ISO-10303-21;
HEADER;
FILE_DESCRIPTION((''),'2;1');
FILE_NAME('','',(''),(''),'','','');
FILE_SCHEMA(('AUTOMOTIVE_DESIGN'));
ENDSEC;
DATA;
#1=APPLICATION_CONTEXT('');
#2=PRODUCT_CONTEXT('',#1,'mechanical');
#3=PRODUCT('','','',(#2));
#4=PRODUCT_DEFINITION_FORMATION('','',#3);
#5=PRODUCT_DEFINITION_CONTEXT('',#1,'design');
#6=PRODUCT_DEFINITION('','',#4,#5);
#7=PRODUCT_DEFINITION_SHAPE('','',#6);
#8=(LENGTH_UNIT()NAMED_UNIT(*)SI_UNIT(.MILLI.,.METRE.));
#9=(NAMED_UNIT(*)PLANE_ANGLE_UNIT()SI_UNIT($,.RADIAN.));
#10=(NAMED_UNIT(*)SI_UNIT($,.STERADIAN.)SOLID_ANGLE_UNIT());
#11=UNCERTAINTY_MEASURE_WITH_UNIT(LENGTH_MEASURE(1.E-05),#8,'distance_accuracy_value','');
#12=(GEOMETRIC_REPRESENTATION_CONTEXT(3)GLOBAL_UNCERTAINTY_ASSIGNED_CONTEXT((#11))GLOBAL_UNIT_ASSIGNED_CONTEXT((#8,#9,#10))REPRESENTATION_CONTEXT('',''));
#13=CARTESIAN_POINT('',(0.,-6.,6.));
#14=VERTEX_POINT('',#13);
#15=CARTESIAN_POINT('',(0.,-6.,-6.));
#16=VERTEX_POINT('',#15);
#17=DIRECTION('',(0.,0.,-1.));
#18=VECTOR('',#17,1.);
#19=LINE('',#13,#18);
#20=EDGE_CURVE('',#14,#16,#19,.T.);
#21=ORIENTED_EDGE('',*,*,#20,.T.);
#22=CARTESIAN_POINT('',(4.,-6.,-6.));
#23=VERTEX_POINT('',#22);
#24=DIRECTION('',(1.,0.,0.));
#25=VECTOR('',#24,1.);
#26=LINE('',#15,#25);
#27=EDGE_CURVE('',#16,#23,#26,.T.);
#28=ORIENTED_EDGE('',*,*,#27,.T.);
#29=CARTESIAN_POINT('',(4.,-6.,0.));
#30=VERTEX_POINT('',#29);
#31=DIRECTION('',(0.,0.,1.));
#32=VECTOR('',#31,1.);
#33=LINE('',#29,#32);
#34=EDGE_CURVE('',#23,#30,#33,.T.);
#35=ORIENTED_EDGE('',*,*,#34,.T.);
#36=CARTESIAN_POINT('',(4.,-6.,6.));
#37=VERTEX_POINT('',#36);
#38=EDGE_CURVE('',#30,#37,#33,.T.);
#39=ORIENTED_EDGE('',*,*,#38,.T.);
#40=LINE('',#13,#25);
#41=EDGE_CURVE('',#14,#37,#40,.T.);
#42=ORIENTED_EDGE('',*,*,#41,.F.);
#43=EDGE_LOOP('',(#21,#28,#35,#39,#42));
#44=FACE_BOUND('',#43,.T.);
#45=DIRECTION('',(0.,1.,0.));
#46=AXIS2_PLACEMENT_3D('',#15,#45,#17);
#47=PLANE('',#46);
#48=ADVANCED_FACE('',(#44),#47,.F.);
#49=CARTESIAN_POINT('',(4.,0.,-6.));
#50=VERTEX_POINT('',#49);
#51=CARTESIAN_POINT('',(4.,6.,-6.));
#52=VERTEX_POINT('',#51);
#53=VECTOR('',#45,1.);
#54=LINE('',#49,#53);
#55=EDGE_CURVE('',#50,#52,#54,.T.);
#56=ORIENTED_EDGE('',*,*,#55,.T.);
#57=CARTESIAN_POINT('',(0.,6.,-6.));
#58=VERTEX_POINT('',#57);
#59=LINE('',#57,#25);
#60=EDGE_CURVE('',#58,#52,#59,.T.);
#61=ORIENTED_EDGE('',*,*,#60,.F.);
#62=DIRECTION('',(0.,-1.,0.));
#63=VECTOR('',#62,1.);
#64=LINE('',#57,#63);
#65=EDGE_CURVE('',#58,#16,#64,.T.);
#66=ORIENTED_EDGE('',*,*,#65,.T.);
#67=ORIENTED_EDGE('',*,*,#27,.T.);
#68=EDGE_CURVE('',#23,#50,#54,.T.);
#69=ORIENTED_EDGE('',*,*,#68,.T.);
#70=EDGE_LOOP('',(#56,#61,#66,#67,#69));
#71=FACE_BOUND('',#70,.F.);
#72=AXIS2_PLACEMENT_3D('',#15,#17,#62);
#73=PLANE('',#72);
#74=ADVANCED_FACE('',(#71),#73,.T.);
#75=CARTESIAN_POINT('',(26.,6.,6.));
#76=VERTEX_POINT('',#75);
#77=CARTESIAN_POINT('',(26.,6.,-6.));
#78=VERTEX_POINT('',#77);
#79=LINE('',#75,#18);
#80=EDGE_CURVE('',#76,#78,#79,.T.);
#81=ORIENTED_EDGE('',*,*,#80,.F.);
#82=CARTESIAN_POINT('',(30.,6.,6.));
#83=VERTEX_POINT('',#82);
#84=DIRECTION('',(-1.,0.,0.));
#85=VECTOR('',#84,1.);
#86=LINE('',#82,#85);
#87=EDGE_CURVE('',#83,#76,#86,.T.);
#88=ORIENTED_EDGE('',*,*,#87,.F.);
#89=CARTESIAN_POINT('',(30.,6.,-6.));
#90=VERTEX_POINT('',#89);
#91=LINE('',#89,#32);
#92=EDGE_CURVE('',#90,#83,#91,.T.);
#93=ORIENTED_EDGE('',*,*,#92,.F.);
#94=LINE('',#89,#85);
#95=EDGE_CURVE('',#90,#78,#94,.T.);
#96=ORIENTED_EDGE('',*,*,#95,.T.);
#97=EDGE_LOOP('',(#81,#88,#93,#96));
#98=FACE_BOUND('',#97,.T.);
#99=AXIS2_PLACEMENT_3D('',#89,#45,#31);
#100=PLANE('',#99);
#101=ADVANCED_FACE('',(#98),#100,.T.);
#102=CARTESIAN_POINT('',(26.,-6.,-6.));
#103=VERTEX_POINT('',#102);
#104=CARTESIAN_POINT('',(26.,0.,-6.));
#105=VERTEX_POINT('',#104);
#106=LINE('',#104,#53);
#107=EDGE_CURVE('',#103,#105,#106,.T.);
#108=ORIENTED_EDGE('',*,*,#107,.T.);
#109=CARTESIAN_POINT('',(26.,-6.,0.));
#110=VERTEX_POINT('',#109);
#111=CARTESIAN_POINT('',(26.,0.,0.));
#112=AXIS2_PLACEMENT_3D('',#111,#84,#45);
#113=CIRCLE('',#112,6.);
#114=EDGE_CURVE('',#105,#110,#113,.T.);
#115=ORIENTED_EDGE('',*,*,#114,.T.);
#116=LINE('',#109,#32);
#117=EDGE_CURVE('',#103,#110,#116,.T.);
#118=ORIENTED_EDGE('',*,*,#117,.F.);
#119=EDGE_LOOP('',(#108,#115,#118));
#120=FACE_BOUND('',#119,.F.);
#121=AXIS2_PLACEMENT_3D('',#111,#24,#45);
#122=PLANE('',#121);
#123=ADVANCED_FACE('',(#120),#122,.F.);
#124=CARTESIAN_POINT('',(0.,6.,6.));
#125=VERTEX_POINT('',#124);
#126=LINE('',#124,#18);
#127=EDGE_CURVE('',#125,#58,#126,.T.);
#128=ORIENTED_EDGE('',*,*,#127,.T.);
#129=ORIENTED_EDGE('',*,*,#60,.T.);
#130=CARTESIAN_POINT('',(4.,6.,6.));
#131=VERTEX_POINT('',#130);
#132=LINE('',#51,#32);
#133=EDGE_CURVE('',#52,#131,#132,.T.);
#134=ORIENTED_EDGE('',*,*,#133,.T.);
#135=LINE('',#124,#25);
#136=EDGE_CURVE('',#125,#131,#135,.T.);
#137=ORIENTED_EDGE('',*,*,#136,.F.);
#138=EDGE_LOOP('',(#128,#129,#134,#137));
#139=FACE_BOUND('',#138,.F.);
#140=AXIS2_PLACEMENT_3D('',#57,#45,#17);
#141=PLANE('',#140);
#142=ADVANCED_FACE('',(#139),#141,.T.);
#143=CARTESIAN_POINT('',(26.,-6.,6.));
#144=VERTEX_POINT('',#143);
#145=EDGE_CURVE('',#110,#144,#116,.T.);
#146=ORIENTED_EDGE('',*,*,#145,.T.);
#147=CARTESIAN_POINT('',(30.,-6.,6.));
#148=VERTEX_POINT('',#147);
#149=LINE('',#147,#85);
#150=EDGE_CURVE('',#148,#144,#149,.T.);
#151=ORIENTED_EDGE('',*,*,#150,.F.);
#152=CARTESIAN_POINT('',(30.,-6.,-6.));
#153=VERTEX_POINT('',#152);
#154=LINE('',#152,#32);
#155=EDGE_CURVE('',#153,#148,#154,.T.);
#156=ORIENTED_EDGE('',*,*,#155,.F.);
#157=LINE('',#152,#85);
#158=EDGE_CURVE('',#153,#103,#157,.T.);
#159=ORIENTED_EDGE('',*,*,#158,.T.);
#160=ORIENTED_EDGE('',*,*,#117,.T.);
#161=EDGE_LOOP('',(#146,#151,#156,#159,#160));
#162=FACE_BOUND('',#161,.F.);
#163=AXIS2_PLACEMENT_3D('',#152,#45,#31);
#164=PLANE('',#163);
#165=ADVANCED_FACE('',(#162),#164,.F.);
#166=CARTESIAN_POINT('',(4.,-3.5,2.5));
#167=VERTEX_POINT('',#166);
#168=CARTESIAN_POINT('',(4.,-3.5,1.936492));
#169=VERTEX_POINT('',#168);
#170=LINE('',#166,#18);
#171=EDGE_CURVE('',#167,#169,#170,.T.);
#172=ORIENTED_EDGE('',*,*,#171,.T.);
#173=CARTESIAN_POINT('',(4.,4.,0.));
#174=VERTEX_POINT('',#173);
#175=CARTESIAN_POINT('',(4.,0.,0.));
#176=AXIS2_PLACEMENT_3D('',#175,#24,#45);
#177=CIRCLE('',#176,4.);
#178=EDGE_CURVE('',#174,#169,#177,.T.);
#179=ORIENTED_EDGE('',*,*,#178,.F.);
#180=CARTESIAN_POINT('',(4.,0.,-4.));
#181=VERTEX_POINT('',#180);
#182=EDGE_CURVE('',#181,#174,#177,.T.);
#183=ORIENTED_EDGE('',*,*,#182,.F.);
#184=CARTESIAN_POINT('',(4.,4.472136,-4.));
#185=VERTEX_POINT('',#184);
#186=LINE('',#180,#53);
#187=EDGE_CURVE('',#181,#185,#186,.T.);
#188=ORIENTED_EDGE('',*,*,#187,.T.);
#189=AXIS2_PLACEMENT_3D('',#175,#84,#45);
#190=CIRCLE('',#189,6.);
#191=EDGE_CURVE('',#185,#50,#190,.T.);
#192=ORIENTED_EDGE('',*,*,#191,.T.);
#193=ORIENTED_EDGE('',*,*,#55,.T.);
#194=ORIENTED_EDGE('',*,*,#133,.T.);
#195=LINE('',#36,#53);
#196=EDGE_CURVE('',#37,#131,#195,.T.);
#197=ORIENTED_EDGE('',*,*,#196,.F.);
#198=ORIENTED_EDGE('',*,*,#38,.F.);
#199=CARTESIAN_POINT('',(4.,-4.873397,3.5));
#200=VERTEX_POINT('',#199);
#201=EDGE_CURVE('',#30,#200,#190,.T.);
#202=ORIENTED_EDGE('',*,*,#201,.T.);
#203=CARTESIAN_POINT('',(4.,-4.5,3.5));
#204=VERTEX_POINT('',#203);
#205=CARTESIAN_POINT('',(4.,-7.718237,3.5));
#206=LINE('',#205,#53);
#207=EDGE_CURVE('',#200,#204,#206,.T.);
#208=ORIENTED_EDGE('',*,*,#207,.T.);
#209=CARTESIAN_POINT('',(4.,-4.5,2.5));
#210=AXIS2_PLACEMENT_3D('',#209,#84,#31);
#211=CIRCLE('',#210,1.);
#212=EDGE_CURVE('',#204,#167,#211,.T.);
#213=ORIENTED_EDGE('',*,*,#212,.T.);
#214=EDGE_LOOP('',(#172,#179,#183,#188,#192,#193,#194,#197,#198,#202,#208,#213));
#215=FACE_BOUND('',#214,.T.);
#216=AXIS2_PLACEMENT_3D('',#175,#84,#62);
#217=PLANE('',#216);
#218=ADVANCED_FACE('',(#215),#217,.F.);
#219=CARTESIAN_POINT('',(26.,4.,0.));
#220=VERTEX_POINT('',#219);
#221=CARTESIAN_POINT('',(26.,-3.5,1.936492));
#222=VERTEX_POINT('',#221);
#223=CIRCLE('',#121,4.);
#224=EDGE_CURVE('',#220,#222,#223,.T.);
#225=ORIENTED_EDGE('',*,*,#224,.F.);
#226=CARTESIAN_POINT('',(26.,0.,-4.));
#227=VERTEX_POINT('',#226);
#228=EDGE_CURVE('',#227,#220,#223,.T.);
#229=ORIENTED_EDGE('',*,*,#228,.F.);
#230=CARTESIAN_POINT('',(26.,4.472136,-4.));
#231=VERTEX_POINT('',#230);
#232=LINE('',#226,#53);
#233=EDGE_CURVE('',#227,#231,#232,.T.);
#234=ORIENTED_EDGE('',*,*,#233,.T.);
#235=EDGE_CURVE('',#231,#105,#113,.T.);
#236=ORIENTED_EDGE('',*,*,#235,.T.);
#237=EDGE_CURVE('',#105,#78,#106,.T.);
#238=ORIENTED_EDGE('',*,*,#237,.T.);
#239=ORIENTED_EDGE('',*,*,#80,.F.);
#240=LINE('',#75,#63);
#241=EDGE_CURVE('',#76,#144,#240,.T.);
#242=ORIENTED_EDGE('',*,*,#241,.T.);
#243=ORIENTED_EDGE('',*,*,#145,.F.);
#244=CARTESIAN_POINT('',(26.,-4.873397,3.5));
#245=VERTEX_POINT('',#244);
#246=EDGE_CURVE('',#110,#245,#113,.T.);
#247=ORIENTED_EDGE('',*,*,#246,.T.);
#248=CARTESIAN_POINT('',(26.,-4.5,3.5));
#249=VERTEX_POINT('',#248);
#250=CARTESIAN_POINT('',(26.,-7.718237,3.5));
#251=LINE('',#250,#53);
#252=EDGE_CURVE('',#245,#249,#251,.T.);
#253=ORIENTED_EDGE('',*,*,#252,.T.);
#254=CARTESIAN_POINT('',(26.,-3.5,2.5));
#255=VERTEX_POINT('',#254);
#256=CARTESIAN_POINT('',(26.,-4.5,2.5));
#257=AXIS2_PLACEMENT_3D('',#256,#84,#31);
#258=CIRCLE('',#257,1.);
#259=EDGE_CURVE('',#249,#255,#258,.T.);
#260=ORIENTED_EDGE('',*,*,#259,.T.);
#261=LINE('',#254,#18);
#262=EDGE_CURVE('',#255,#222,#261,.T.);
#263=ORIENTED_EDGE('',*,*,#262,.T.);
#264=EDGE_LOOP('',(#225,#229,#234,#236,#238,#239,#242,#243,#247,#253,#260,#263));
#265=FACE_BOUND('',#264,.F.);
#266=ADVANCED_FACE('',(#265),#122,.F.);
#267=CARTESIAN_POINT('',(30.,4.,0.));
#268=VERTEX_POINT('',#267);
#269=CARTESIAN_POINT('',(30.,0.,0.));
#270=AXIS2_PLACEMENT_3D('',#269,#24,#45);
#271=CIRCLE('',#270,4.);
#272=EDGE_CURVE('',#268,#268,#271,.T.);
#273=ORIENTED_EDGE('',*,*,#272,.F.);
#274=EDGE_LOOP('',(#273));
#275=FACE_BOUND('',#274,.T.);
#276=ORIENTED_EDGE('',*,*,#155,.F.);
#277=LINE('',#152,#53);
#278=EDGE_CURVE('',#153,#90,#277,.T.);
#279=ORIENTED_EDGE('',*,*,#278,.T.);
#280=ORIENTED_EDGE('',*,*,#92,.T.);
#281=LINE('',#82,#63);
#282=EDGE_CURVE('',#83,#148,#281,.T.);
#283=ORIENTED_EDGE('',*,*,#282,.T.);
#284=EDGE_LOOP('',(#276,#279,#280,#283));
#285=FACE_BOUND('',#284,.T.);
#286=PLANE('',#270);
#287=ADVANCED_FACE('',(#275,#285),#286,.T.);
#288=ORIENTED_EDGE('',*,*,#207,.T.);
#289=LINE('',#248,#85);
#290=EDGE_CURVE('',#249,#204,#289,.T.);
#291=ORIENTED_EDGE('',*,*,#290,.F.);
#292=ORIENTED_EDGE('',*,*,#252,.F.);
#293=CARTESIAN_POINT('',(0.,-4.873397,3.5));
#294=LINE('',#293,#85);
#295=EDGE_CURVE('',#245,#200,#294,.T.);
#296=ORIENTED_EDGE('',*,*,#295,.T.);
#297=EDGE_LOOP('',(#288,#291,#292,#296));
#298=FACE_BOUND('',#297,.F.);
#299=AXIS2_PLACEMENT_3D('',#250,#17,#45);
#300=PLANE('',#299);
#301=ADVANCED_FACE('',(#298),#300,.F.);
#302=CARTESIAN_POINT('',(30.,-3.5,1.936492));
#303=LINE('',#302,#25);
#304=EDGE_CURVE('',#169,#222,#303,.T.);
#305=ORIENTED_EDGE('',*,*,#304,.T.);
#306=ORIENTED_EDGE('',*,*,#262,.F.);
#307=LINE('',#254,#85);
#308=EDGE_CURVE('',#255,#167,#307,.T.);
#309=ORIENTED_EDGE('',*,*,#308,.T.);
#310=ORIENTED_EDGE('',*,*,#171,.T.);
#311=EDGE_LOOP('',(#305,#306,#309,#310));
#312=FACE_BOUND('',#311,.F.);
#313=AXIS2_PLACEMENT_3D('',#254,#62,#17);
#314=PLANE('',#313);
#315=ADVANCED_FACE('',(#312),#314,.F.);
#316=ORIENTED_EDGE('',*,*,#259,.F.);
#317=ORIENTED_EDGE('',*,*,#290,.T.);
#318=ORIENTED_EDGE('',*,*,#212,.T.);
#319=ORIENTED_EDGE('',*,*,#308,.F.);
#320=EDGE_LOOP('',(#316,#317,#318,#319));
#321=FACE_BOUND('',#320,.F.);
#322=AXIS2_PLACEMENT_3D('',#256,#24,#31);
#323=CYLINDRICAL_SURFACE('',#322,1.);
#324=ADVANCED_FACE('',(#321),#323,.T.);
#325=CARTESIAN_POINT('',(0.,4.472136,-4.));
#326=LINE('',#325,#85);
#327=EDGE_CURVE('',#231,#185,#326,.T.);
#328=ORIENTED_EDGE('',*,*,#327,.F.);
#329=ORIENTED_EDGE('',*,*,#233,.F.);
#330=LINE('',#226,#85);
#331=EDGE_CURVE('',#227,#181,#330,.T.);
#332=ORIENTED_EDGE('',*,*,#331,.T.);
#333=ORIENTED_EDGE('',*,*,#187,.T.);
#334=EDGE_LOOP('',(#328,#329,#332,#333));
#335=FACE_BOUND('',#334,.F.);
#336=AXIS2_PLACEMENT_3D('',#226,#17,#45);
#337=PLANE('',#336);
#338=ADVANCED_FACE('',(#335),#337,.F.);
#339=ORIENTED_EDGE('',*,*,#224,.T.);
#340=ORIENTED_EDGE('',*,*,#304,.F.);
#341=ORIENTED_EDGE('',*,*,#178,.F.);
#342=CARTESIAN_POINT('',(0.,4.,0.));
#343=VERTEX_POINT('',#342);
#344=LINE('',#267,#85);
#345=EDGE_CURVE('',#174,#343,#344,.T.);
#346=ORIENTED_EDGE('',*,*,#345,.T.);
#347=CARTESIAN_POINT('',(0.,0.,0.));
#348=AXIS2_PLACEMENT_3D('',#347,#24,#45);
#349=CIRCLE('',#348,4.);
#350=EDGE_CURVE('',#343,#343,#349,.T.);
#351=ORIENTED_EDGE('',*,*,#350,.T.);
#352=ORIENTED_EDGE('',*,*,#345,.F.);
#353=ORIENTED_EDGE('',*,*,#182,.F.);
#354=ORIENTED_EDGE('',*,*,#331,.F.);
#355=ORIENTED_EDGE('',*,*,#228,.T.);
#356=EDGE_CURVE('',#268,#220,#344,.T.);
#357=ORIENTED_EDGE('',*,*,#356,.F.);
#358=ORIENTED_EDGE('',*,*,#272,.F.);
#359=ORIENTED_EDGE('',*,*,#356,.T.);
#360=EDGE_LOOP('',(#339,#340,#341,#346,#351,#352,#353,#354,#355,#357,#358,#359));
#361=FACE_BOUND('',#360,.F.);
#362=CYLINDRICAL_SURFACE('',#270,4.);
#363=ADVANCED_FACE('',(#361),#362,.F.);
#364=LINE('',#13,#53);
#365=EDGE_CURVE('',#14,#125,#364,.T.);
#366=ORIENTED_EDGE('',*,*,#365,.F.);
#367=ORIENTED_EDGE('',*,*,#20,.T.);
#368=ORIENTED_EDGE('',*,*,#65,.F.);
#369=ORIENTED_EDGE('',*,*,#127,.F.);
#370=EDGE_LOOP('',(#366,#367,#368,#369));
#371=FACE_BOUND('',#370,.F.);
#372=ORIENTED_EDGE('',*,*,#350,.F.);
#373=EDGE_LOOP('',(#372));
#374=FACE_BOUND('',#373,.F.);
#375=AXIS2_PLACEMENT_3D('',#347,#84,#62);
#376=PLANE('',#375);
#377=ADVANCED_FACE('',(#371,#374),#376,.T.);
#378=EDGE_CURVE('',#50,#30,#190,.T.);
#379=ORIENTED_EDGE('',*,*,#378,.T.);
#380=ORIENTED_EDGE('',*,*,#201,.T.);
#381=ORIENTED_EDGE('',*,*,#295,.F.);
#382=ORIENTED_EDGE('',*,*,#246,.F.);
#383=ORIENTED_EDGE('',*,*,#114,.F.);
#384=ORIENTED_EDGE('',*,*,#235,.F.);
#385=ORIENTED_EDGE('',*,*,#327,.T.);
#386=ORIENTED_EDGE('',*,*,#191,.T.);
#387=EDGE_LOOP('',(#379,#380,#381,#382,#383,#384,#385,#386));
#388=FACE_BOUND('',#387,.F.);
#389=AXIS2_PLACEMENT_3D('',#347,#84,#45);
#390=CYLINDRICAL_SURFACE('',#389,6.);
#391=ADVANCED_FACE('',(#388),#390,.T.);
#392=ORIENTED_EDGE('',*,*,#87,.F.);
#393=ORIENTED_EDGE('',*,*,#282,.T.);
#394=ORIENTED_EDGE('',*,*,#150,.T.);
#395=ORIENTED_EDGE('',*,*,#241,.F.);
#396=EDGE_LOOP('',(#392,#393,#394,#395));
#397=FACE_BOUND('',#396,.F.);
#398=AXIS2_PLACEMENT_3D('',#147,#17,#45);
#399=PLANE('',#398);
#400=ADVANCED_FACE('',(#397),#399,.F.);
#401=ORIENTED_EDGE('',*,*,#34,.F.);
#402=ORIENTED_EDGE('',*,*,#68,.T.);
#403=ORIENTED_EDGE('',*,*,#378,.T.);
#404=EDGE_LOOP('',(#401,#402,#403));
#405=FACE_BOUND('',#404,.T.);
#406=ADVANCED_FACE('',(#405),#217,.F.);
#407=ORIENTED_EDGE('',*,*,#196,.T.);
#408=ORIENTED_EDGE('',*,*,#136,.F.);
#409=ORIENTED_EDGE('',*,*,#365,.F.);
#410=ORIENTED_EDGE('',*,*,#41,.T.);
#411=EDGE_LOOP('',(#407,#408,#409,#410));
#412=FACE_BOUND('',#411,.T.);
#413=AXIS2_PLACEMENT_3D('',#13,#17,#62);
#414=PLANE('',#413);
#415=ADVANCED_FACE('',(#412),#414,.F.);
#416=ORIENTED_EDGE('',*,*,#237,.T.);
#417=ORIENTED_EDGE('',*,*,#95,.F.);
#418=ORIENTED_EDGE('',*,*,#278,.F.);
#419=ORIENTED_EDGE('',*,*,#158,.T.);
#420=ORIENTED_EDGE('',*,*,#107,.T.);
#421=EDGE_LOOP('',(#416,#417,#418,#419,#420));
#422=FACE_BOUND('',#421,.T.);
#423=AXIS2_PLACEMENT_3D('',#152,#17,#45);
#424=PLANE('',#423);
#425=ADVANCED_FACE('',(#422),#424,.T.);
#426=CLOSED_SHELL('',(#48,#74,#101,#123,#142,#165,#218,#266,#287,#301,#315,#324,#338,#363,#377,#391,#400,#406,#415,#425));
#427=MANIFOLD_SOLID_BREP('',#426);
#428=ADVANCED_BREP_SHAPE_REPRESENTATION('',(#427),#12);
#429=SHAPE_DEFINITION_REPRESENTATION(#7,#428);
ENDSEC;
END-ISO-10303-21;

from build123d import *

# Parameters (mm, degrees)
F0_R     = 6
F1_DEPTH = 30
F2_R     = 4
F3_DEPTH = 30.001
F6_DEPTH = 22
F7_W     = 12
F7_H     = 12
F7_R     = 4
F9_DEPTH = 4


# Not quite as in the source:
# - a pattern or mirror of a feature is missing from the dataset's text; its kind, count and spacing are read off the source's solid


with BuildPart() as f1:
    # F0 (on Right) → F1 (new body)
    with BuildSketch(Plane.YZ):
        Circle(F0_R)
    extrude(amount=F1_DEPTH)

    # F2 (on face) → F3 (cut, through all)
    with BuildSketch(Plane.YZ.offset(30)):
        Circle(F2_R)
    extrude(amount=-F3_DEPTH, mode=Mode.SUBTRACT)

    # F5 (on offset) → F6 (cut)
    with BuildSketch(Plane.YZ.offset(26)):
        with BuildLine():
            Line((0, 0), (0, -4))
            Line((0, -4), (8, -4))
            Line((8, -4), (8.9776590466, 9.4645246863))
            Line((8.9776590466, 9.4645246863), (-7.7182371169, 9.4645246863))
            Line((-7.7182371169, 9.4645246863), (-7.7182371169, 3.5))
            Line((-7.7182371169, 3.5), (-4.5, 3.5))
            ThreePointArc((-4.5, 3.5), (-3.7928932188, 3.2071067812), (-3.5, 2.5))
            Line((-3.5, 2.5), (-3.5, 0))
            Line((-3.5, 0), (0, 0))
        make_face()
    extrude(amount=-F6_DEPTH, mode=Mode.SUBTRACT)

    # F7 (on face) → F9 (join)
    with BuildSketch(Plane.YZ.offset(30)):
        Rectangle(F7_W, F7_H)
        Circle(F7_R, mode=Mode.SUBTRACT)
    f9 = extrude(amount=-F9_DEPTH)

    # F9_copies: F9 across plane
    add(f9.mirror(Plane(origin=(15, 0, 0), x_dir=(0, 0, -1), z_dir=(-1, 0, 0))))


solid = f1.part
